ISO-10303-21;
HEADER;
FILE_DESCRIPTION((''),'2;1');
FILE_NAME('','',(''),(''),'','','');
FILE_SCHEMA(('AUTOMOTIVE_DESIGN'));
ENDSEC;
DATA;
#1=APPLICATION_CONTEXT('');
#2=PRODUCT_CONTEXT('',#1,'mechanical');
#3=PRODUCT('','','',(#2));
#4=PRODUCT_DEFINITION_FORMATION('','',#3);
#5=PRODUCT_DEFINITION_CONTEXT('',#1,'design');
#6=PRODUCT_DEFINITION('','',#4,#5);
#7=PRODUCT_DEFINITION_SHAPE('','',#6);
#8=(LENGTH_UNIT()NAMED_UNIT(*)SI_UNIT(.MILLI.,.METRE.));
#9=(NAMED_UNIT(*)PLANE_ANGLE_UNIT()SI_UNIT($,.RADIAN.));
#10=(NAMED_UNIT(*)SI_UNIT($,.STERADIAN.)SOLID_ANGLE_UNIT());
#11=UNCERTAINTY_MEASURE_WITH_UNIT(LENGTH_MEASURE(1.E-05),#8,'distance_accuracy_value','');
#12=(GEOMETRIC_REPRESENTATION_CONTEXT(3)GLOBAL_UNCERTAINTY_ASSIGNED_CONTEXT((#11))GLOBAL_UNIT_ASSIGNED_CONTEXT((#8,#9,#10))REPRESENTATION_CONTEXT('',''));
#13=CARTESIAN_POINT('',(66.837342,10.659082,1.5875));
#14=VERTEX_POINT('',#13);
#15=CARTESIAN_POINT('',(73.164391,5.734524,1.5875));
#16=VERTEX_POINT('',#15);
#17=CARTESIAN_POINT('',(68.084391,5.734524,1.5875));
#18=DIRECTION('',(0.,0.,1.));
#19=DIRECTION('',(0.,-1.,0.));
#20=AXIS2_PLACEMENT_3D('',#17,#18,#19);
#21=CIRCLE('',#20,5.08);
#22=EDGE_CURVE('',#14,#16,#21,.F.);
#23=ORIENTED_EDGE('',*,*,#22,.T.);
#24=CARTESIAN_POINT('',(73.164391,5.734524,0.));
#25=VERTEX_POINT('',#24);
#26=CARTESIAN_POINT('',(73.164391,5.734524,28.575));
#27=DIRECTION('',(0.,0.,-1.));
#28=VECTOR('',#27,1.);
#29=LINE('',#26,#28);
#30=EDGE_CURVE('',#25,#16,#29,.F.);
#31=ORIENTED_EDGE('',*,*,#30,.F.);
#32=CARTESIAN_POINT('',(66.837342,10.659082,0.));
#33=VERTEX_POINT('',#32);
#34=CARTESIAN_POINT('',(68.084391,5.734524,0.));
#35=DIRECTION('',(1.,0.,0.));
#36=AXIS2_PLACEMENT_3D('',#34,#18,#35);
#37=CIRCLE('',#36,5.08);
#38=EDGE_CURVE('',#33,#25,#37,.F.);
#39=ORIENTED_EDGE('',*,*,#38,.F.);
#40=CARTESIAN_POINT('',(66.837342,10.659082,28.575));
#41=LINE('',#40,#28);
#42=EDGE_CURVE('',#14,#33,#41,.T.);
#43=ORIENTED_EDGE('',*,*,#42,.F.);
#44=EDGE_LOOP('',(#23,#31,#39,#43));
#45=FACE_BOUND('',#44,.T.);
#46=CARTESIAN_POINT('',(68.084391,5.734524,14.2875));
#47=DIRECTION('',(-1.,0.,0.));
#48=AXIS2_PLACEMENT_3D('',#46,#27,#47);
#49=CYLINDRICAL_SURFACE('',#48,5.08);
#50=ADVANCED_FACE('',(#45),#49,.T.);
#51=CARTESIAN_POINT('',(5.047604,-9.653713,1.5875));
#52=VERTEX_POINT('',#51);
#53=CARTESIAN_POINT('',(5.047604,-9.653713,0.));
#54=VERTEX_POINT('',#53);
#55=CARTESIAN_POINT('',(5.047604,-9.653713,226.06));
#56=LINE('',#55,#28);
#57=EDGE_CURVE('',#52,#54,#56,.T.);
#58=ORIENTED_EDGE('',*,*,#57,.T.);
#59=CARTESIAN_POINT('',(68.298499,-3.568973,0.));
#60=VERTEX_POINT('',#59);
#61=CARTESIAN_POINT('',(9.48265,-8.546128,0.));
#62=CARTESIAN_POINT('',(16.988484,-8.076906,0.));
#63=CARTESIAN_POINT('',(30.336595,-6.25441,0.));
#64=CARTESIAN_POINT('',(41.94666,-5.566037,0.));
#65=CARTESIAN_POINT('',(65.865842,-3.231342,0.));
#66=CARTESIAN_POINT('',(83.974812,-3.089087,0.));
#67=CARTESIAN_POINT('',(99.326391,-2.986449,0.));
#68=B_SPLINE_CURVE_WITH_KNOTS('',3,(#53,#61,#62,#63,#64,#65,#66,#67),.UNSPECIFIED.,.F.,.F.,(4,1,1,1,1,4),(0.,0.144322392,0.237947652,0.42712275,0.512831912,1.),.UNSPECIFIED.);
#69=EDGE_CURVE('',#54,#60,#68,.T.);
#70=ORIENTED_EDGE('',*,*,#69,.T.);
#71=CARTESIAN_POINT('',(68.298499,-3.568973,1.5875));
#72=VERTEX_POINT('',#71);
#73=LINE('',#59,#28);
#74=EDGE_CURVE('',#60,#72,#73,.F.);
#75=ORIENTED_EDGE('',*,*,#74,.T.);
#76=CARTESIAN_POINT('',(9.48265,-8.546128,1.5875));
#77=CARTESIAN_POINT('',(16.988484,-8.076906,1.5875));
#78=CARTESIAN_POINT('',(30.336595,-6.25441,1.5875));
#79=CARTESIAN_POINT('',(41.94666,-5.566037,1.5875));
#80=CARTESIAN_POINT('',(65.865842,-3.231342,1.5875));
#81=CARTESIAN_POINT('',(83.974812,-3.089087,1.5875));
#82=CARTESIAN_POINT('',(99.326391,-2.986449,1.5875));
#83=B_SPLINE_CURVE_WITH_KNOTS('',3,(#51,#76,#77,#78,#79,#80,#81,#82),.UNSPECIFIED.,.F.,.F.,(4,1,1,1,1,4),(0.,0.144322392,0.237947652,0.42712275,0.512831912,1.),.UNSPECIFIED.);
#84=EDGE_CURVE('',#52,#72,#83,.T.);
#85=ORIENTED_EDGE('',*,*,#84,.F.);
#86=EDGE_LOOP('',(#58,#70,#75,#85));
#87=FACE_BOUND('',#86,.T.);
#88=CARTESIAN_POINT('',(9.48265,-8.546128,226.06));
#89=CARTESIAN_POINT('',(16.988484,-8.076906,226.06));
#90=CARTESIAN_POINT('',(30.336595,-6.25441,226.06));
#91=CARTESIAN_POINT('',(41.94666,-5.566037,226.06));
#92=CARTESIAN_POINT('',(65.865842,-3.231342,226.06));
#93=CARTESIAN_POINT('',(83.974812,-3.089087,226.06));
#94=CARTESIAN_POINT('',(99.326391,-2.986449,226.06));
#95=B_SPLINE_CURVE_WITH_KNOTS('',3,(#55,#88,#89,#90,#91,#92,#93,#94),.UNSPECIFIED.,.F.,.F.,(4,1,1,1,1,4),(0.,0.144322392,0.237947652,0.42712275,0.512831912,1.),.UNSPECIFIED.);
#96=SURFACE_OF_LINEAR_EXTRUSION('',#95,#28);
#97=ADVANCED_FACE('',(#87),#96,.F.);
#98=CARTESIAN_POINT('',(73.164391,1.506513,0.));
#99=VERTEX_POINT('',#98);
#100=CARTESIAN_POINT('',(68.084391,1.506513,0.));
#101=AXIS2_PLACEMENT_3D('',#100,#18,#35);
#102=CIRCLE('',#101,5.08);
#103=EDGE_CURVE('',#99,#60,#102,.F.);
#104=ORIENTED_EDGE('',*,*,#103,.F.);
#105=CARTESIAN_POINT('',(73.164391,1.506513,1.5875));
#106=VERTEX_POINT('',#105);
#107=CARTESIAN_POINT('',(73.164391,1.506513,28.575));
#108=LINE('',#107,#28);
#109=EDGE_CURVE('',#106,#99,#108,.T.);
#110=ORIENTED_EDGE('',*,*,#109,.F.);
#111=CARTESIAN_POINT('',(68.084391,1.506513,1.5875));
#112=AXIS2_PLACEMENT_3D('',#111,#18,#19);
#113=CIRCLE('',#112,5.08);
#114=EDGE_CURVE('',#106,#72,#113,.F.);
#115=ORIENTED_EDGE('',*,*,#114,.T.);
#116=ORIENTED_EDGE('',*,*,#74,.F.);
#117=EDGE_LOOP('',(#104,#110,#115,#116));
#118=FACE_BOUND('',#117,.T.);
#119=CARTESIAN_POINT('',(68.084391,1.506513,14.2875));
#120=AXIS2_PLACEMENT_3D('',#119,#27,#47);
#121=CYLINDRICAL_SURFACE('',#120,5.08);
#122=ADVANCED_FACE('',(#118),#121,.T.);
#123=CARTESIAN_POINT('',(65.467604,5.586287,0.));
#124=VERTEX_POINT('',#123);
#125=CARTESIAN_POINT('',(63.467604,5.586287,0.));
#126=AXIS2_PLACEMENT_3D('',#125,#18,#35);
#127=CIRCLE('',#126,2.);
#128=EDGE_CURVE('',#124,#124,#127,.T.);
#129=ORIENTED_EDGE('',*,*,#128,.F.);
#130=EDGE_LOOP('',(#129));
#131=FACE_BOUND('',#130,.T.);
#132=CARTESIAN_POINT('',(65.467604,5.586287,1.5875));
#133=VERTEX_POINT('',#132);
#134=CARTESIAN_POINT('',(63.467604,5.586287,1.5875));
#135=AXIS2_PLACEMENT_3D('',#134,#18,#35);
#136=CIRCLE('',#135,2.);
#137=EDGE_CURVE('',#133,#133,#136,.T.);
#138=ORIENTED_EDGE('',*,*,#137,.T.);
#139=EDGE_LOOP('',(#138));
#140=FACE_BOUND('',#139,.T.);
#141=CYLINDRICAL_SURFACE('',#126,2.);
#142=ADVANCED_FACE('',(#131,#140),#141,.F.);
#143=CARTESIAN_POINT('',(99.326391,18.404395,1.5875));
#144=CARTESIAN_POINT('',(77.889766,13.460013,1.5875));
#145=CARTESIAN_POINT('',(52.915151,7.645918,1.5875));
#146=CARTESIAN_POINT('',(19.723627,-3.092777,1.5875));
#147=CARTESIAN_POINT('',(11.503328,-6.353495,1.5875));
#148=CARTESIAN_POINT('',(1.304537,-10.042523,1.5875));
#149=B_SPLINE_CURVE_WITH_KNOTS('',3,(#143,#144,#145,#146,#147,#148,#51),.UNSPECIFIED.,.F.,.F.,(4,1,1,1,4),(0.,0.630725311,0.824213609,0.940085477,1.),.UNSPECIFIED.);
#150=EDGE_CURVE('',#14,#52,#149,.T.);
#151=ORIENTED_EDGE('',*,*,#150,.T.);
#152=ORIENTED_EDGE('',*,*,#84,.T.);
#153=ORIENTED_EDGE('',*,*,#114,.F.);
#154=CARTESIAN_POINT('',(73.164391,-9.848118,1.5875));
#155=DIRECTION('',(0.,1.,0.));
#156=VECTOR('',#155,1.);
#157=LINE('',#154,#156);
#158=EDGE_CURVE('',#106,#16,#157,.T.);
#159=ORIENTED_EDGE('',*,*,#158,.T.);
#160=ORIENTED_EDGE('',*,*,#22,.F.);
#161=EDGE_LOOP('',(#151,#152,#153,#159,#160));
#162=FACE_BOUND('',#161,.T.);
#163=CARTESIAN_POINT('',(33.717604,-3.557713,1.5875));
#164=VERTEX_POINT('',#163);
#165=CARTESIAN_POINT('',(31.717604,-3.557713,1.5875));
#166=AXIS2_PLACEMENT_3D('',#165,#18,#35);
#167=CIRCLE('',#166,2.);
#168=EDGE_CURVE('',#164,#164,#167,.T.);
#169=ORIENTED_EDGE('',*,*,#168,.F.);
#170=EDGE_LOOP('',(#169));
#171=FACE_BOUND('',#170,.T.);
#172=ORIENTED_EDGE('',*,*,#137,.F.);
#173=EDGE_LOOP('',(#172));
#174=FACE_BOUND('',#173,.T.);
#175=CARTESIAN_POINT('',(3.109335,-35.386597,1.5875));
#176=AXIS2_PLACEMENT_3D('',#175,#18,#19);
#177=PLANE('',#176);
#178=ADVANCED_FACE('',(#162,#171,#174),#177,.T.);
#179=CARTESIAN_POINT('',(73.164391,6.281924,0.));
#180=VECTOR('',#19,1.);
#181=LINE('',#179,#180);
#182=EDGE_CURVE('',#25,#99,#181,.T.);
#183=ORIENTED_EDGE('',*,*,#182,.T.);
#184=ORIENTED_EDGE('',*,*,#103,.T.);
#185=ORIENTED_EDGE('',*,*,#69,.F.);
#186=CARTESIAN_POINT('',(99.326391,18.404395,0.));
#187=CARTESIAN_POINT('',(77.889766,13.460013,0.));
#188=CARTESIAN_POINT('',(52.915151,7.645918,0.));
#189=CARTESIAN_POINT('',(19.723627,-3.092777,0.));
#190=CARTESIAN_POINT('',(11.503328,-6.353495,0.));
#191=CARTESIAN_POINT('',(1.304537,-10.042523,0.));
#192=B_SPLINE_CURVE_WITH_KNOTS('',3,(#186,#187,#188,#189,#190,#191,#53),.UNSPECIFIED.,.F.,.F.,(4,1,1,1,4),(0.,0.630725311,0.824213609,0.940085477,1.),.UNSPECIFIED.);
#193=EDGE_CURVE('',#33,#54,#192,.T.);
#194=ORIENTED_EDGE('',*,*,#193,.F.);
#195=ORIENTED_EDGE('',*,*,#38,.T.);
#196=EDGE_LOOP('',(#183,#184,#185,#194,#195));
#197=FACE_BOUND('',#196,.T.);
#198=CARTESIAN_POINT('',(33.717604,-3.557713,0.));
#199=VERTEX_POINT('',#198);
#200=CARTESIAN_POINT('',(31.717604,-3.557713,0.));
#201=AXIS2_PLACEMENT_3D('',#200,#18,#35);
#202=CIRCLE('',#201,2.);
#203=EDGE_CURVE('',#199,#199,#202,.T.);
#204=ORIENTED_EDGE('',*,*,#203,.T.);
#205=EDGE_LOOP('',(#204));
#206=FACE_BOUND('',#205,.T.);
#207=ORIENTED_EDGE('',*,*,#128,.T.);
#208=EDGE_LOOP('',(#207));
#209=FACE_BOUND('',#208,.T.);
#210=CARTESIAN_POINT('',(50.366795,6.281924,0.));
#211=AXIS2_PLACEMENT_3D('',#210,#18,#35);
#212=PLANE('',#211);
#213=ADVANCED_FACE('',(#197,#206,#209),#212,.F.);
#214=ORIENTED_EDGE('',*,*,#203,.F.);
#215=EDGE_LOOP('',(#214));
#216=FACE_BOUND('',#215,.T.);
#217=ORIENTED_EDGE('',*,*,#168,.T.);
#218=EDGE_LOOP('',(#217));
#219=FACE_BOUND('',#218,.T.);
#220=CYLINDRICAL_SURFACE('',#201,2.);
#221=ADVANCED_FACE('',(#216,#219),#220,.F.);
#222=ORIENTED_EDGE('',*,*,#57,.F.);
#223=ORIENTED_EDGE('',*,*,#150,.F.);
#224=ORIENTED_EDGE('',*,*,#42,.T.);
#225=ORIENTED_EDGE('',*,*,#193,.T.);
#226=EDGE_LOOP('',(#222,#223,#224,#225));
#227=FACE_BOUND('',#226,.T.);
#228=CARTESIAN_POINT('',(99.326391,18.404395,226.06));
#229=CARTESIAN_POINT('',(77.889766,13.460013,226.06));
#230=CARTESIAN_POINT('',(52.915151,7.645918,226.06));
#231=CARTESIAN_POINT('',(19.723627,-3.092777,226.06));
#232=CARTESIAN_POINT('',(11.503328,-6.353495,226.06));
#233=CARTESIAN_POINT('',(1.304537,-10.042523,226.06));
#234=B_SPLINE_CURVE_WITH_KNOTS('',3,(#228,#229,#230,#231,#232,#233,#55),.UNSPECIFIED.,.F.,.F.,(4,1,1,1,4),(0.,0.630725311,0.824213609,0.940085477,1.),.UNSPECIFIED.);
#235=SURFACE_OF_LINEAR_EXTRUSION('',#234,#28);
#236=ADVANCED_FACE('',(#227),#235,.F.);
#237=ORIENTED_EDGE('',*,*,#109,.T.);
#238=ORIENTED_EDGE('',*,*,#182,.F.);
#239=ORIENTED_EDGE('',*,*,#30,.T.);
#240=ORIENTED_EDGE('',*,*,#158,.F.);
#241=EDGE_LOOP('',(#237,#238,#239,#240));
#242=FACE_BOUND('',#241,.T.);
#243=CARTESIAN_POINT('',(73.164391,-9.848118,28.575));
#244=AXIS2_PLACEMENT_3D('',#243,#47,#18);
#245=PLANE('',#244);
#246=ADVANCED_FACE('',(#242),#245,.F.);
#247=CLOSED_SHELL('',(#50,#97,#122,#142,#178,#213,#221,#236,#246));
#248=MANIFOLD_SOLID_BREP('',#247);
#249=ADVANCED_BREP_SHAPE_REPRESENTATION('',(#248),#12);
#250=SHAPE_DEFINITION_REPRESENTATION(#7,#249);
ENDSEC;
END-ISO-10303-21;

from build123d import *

# Parameters (mm, degrees)
BOSS_EXTRUDE1_DEPTH       = 226.06
CUT_EXTRUDE1_DEPTH        = 248.603669875
CUT_EXTRUDE1_DEPTH_BACK   = 248.603669875
FILLET1_R                 = 5.08
SHELL1_START              = 31.75
SHELL1_DEPTH              = 162.56
SHELL1_START_2            = 3.175
SHELL1_2_DEPTH            = 219.71
SKETCH3_R                 = 2.032
CUT_EXTRUDE2_DEPTH        = 246.233624371
BOSS_EXTRUDE2_START       = -4.025198094
BOSS_EXTRUDE2_OUTLINE_R   = 1.5875
BOSS_EXTRUDE2_DEPTH       = 5.811624811
BOSS_EXTRUDE2_START_2     = -8.955775483
BOSS_EXTRUDE2_2_OUTLINE_R = 1.5875
BOSS_EXTRUDE2_2_DEPTH     = 4.930577389
CUT_EXTRUDE3_DEPTH        = 246.233624371
CUT_EXTRUDE3_DEPTH_BACK   = 246.233624371
SKETCH5_W                 = 235.931423423
SKETCH5_H                 = 77.627996968
SKETCH6_R                 = 2
CUT_EXTRUDE4_DEPTH        = 74.976362333


# Read off the part's stored shape, not the designer's step: Shell1, Boss-Extrude2
with BuildPart() as part:
    # Sketch1 → Boss-Extrude1 (new body)
    with BuildSketch(Plane.XY):
        with BuildLine():
            Line((99.32639085, 18.404394796), (99.32639085, -2.986448862))
            add(Edge.make_bspline(
                [(5.047603806, -9.653713384), (9.482649657, -8.546128483), (16.988483729, -8.076906091), (30.336595099, -6.254410192), (41.946659702, -5.566037344), (65.865842143, -3.231342143), (83.974811725, -3.089086557), (99.32639085, -2.986448862)],
                knots=[0, 0, 0, 0, 0.144322392, 0.237947652, 0.42712275, 0.512831912, 1, 1, 1, 1], degree=3))
            add(Edge.make_bspline(
                [(5.047603806, -9.653713384), (1.304537033, -10.042523479), (11.503328192, -6.353494655), (19.723627138, -3.092777487), (52.915151131, 7.645918304), (77.889766355, 13.460013374), (99.32639085, 18.404394796)],
                knots=[0, 0, 0, 0, 0.059914523, 0.175786391, 0.369274689, 1, 1, 1, 1], degree=3))
        make_face()
    extrude(amount=BOSS_EXTRUDE1_DEPTH)

    # Sketch2 → Cut-Extrude1 (cut, two sides: drawn at the far end of the back side and taken through both)
    with BuildSketch(Plane(origin=(0, 0, 0), x_dir=(1, 0, 0), z_dir=(0, 1, 0)).offset(-CUT_EXTRUDE1_DEPTH_BACK)):
        Polygon((169.681502528, 0), (169.681502528, -226.06), (73.16439085, -226.06), (73.16439085, -197.485), (93.73839085, -197.485), (93.73839085, -28.575), (73.16439085, -28.575), (73.16439085, 0), align=None)
    extrude(amount=CUT_EXTRUDE1_DEPTH + CUT_EXTRUDE1_DEPTH_BACK, mode=Mode.SUBTRACT)

    # Fillet1
    fillet1_edges = [part.edges().sort_by_distance(p)[0] for p in [
        (73.16439085, -3.388889971, 14.2875),
        (73.16439085, 12.236004014, 14.2875),
        (93.73839085, -3.026654485, 113.03),
        (93.73839085, 17.113551214, 113.03),
        (73.16439085, -3.388889971, 211.7725),
        (73.16439085, 12.236004014, 211.7725),
    ]]
    fillet(fillet1_edges, radius=FILLET1_R)

    # Shell1 outline → Shell1 (cut)
    with BuildSketch(Plane.XY.offset(SHELL1_START)):
        with BuildLine():
            ThreePointArc((90.56339085, 10.716231692), (89.84210345, 12.208829924), (88.224441264, 12.571147528))
            add(Edge.make_bspline(
                [(88.224441264, 12.571147528), (87.199954726, 12.331473265), (86.178161178, 12.091844736), (85.158893539, 11.852170354), (84.141984638, 11.612358579), (83.127267128, 11.372317854), (82.11457348, 11.131956606), (81.103735991, 10.891183246), (80.094586779, 10.649906167), (79.086957782, 10.408033746), (78.080680762, 10.165474344), (77.075587303, 9.922136302), (75.365261077, 9.50615692), (74.659515429, 9.333955274), (73.95421322, 9.161291111), (73.24929575, 8.988132524), (72.544704275, 8.814447596), (71.84038, 8.640204402), (71.136264087, 8.465371009), (70.432297655, 8.289915474), (69.728421779, 8.113805846), (69.024577498, 7.937010164), (68.320705808, 7.759496459), (67.616747671, 7.581232754)],
                knots=[0.118068853, 0.118068853, 0.118068853, 0.118068853, 0.118068853, 0.118068853, 0.118068853, 0.118068853, 0.118068853, 0.118068853, 0.118068853, 0.118068853, 0.118068853, 0.242924315, 0.242924315, 0.242924315, 0.242924315, 0.242924315, 0.242924315, 0.242924315, 0.242924315, 0.242924315, 0.242924315, 0.242924315, 0.330745026, 0.330745026, 0.330745026, 0.330745026, 0.330745026, 0.330745026, 0.330745026, 0.330745026, 0.330745026, 0.330745026, 0.330745026, 0.330745026, 0.330745026], degree=12))
            ThreePointArc((67.616747671, 7.581232754), (69.254468773, 7.237834237), (69.98939085, 5.734523672))
            Line((69.98939085, 5.734523672), (69.98939085, 1.506513014))
            ThreePointArc((69.98939085, 1.506513014), (69.459523341, 0.188167221), (68.164681525, -0.396794214))
            add(Edge.make_bspline(
                [(68.164681525, -0.396794214), (68.694992172, -0.374423154), (69.225275053, -0.352727917), (69.755528584, -0.331695291), (70.285751179, -0.311312074), (70.815941255, -0.291565067), (71.346097229, -0.272441078), (71.876217523, -0.25392692), (72.406300557, -0.236009412), (72.936344753, -0.218675382), (73.466348538, -0.201911658), (73.996310335, -0.18570508), (74.526228574, -0.170042489), (75.056101682, -0.154910735), (76.522372139, -0.114466983), (77.45867021, -0.090254504), (78.394813662, -0.06758666), (79.330793845, -0.046390933), (80.266602102, -0.026594862), (81.202229769, -0.008126042), (82.137668173, 0.009087874), (83.072908636, 0.025119175), (84.007942471, 0.040040096), (84.942760983, 0.053922812), (85.87735547, 0.066839443), (86.811717225, 0.07886205), (87.74583753, 0.09006264), (88.679707661, 0.100513159)],
                knots=[0.67202474, 0.67202474, 0.67202474, 0.67202474, 0.67202474, 0.67202474, 0.67202474, 0.67202474, 0.67202474, 0.67202474, 0.67202474, 0.67202474, 0.67202474, 0.67202474, 0.67202474, 0.75, 0.75, 0.75, 0.75, 0.75, 0.75, 0.75, 0.75, 0.75, 0.75, 0.75, 0.75, 0.75, 0.887817721, 0.887817721, 0.887817721, 0.887817721, 0.887817721, 0.887817721, 0.887817721, 0.887817721, 0.887817721, 0.887817721, 0.887817721, 0.887817721, 0.887817721, 0.887817721, 0.887817721], degree=14))
            ThreePointArc((88.679707661, 0.100513159), (90.012944885, 0.665913267), (90.56339085, 2.0053939))
            Line((90.56339085, 2.0053939), (90.56339085, 10.716231692))
        make_face()
        with BuildLine():
            ThreePointArc((69.98939085, 5.734523672), (69.254468773, 7.237834237), (67.616747644, 7.581232862))
            add(Edge.make_bspline(
                [(67.616747644, 7.581232862), (65.399836461, 7.019843113), (63.182067917, 6.451015332), (60.961598132, 5.873750666), (58.736579605, 5.2870495), (56.505161763, 4.689911333), (54.265491496, 4.081334769), (52.015713682, 3.460317509), (49.753971716, 2.825856339), (47.478408044, 2.176947117), (45.187164685, 1.512584769), (42.878383765, 0.831763272), (40.358491497, 0.075974277), (40.166643435, 0.018354472), (39.974662823, -0.039384328), (39.782548624, -0.097242688), (39.590299803, -0.155221168), (39.397915321, -0.213320331), (39.205394144, -0.271540739), (39.012735233, -0.329882954), (38.819937552, -0.388347539), (38.627000064, -0.446935056), (38.433921733, -0.505646067), (38.047481311, -0.6233162), (37.854115889, -0.68227633), (37.660618706, -0.741357704), (37.46700324, -0.800556496), (37.273282999, -0.859868869), (37.079471514, -0.919290978), (36.885582349, -0.97881897), (36.69162909, -1.038448983), (36.497625354, -1.098177145), (36.303584785, -1.157999576), (36.109521054, -1.217912388), (35.527301471, -1.397910273), (35.139116839, -1.518254909), (34.751002758, -1.638914656), (34.363068079, -1.759858551), (33.975421705, -1.881055606), (33.588172595, -2.002474805), (33.20142976, -2.124085105), (32.815302268, -2.245855438), (32.429899238, -2.367754709), (32.045329846, -2.489751794), (31.66170332, -2.611815547), (31.123971117, -2.783433666), (30.968986334, -2.832958389), (30.814181899, -2.882486873), (30.659565113, -2.93201703), (30.505143284, -2.981546776), (30.350923715, -3.031074022), (30.196913716, -3.080596682), (30.043120596, -3.130112665), (29.889551668, -3.179619883), (29.736214245, -3.229116246), (29.583115647, -3.27859966), (29.430263192, -3.328068033)],
                knots=[0.330745026, 0.330745026, 0.330745026, 0.330745026, 0.330745026, 0.330745026, 0.330745026, 0.330745026, 0.330745026, 0.330745026, 0.330745026, 0.330745026, 0.330745026, 0.607310788, 0.607310788, 0.607310788, 0.607310788, 0.607310788, 0.607310788, 0.607310788, 0.607310788, 0.607310788, 0.607310788, 0.607310788, 0.630084943, 0.630084943, 0.630084943, 0.630084943, 0.630084943, 0.630084943, 0.630084943, 0.630084943, 0.630084943, 0.630084943, 0.630084943, 0.652859097, 0.652859097, 0.652859097, 0.652859097, 0.652859097, 0.652859097, 0.652859097, 0.652859097, 0.652859097, 0.652859097, 0.652859097, 0.698407406, 0.698407406, 0.698407406, 0.698407406, 0.698407406, 0.698407406, 0.698407406, 0.698407406, 0.698407406, 0.698407406, 0.698407406, 0.716880093, 0.716880093, 0.716880093, 0.716880093, 0.716880093, 0.716880093, 0.716880093, 0.716880093, 0.716880093, 0.716880093, 0.716880093, 0.716880093, 0.716880093], degree=12))
            add(Edge.make_bspline(
                [(29.430263192, -3.328068033), (30.192321788, -3.253103705), (30.953742852, -3.181055792), (31.714498333, -3.111652976), (32.474560286, -3.044625223), (33.233901052, -2.979703638), (33.992493217, -2.916620464), (34.750309569, -2.855109092), (35.507323058, -2.794904058), (36.26350675, -2.735741051), (37.018833789, -2.677356913), (37.77327735, -2.619489644), (38.526810601, -2.561878406), (39.27940666, -2.504263523), (40.241275886, -2.430197827), (40.451437795, -2.413988578), (40.661523692, -2.397753121), (40.871532992, -2.381485838), (41.081465111, -2.36518111), (41.291319462, -2.34883332), (41.501095461, -2.332436848), (41.710792523, -2.315986075), (41.920410064, -2.299475384), (42.129947497, -2.282899155), (42.339404239, -2.266251771), (42.548779704, -2.249527611), (42.758073307, -2.232721059), (43.071890042, -2.207379213), (43.176475009, -2.198909942), (43.281039293, -2.190417989), (43.38558282, -2.181902656), (43.490105518, -2.173363251), (43.594607315, -2.164799076), (43.699088138, -2.156209439), (43.803547915, -2.147593642), (43.907986571, -2.138950992), (44.012404037, -2.130280793), (44.116800238, -2.12158235), (44.221175102, -2.112854969), (44.325528557, -2.104097954), (44.482026516, -2.090916937), (44.534185416, -2.08651578), (44.586353102, -2.082106088), (44.638462372, -2.077692142), (44.690677468, -2.073262507), (44.74276457, -2.068834253), (44.79486261, -2.064396055), (44.84709011, -2.05993977), (44.899190406, -2.055485443), (44.951182515, -2.051030032), (45.003429676, -2.046545196), (45.055514905, -2.042065555), (45.107662823, -2.037572174), (45.211955574, -2.028569312), (45.264108442, -2.024059127), (45.316267814, -2.019540326), (45.368433702, -2.015013048), (45.42060612, -2.010477431), (45.472785076, -2.005933613), (45.524970589, -2.001381732), (45.577162664, -1.996821927), (45.629361319, -1.992254336), (45.681566563, -1.987679097), (45.73377841, -1.983096348), (45.785996871, -1.978506228), (45.838221958, -1.973908876), (46.3083075, -1.93246885), (46.726586222, -1.895179261), (47.145296128, -1.857506655), (47.564443519, -1.819522312), (47.98403472, -1.781297798), (48.404076086, -1.742904961), (48.824573993, -1.704415937), (49.24553485, -1.665903148), (49.66696508, -1.627439299), (50.088871145, -1.589097383), (50.511259522, -1.550950675), (50.934136722, -1.513072738), (51.357509275, -1.47553742), (51.834368049, -1.433779033), (51.8873602, -1.429145723), (51.940360205, -1.424519069), (51.993368079, -1.419899217), (52.046383832, -1.415286311), (52.099407479, -1.410680497), (52.152439032, -1.40608192), (52.205478504, -1.401490725), (52.258525908, -1.396907058), (52.311581256, -1.392331062), (52.364644562, -1.387762884), (52.417715838, -1.38320267), (52.470795096, -1.378650563), (52.576969604, -1.369562855), (52.630062039, -1.365027462), (52.683179331, -1.360499209), (52.736263003, -1.355982684), (52.78940087, -1.351471194), (52.842545574, -1.346968801), (52.895651993, -1.342479031), (52.948780943, -1.337996995), (53.001972248, -1.333519945), (53.055147327, -1.329054684), (53.108262643, -1.324604451), (53.161436979, -1.320159017), (53.214588182, -1.31572572), (53.37405314, -1.302454763), (53.48036356, -1.293647424), (53.586674415, -1.284879943), (53.692985692, -1.276152212), (53.799297377, -1.267464124), (53.905609457, -1.258815573), (54.011921919, -1.25020645), (54.118234749, -1.241636649), (54.224547934, -1.233106063), (54.330861461, -1.224614583), (54.437175316, -1.216162103), (54.543489487, -1.207748516), (54.649803959, -1.199373714), (54.96874824, -1.174365343), (55.181378913, -1.157847807), (55.394010633, -1.141484125), (55.606643294, -1.125273441), (55.819276791, -1.109214898), (56.031911017, -1.093307639), (56.244545869, -1.077550807), (56.457181238, -1.061943545), (56.669817021, -1.046484998), (56.882453112, -1.031174307), (57.095089404, -1.016010616), (57.307725793, -1.000993068), (57.520362172, -0.986120806), (58.158270965, -0.941937311), (58.583543022, -0.913059346), (59.008813776, -0.884752245), (59.434082397, -0.857009171), (59.859348051, -0.829823289), (60.284609909, -0.803187765), (60.709867137, -0.777095761), (61.135118907, -0.751540443), (61.560364383, -0.726514975), (61.985602738, -0.702012521), (62.410833137, -0.678026246), (62.83605475, -0.654549315), (63.261266746, -0.631574892), (64.006388166, -0.592183223), (64.32630213, -0.575550919), (64.646209835, -0.559196323), (64.96611093, -0.543116532), (65.286005067, -0.527308639), (65.605891895, -0.511769741), (65.925771064, -0.496496937), (66.245642227, -0.481487322), (66.565505034, -0.466737997), (66.885359135, -0.45224606), (67.205204184, -0.438008612), (67.52503983, -0.424022754), (67.844865727, -0.410285587), (68.164681525, -0.396794215)],
                knots=[0.263276283, 0.263276283, 0.263276283, 0.263276283, 0.263276283, 0.263276283, 0.263276283, 0.263276283, 0.263276283, 0.263276283, 0.263276283, 0.263276283, 0.263276283, 0.263276283, 0.263276283, 0.375, 0.375, 0.375, 0.375, 0.375, 0.375, 0.375, 0.375, 0.375, 0.375, 0.375, 0.375, 0.375, 0.40625, 0.40625, 0.40625, 0.40625, 0.40625, 0.40625, 0.40625, 0.40625, 0.40625, 0.40625, 0.40625, 0.40625, 0.40625, 0.421875, 0.421875, 0.421875, 0.421875, 0.421875, 0.421875, 0.421875, 0.421875, 0.421875, 0.421875, 0.421875, 0.421875, 0.421875, 0.4296875, 0.4296875, 0.4296875, 0.4296875, 0.4296875, 0.4296875, 0.4296875, 0.4296875, 0.4296875, 0.4296875, 0.4296875, 0.4296875, 0.4296875, 0.4375, 0.4375, 0.4375, 0.4375, 0.4375, 0.4375, 0.4375, 0.4375, 0.4375, 0.4375, 0.4375, 0.4375, 0.4375, 0.5, 0.5, 0.5, 0.5, 0.5, 0.5, 0.5, 0.5, 0.5, 0.5, 0.5, 0.5, 0.5, 0.5078125, 0.5078125, 0.5078125, 0.5078125, 0.5078125, 0.5078125, 0.5078125, 0.5078125, 0.5078125, 0.5078125, 0.5078125, 0.5078125, 0.5078125, 0.515625, 0.515625, 0.515625, 0.515625, 0.515625, 0.515625, 0.515625, 0.515625, 0.515625, 0.515625, 0.515625, 0.515625, 0.515625, 0.53125, 0.53125, 0.53125, 0.53125, 0.53125, 0.53125, 0.53125, 0.53125, 0.53125, 0.53125, 0.53125, 0.53125, 0.53125, 0.5625, 0.5625, 0.5625, 0.5625, 0.5625, 0.5625, 0.5625, 0.5625, 0.5625, 0.5625, 0.5625, 0.5625, 0.5625, 0.625, 0.625, 0.625, 0.625, 0.625, 0.625, 0.625, 0.625, 0.625, 0.625, 0.625, 0.625, 0.625, 0.67202474, 0.67202474, 0.67202474, 0.67202474, 0.67202474, 0.67202474, 0.67202474, 0.67202474, 0.67202474, 0.67202474, 0.67202474, 0.67202474, 0.67202474, 0.67202474, 0.67202474], degree=14))
            ThreePointArc((68.164681525, -0.396794215), (69.459523341, 0.188167221), (69.98939085, 1.506513014))
            Line((69.98939085, 1.506513014), (69.98939085, 5.734523672))
        make_face()
    extrude(amount=SHELL1_DEPTH, mode=Mode.SUBTRACT)

    # Shell1 2 outline → Shell1 2 (cut)
    with BuildSketch(Plane.XY.offset(SHELL1_START_2)):
        with BuildLine():
            ThreePointArc((69.98939085, 5.734523672), (69.254468773, 7.237834237), (67.616747644, 7.581232862))
            add(Edge.make_bspline(
                [(67.616747644, 7.581232862), (65.399836461, 7.019843113), (63.182067917, 6.451015332), (60.961598132, 5.873750666), (58.736579605, 5.2870495), (56.505161763, 4.689911333), (54.265491496, 4.081334769), (52.015713682, 3.460317509), (49.753971716, 2.825856339), (47.478408044, 2.176947117), (45.187164685, 1.512584769), (42.878383765, 0.831763272), (40.358491497, 0.075974277), (40.166643435, 0.018354472), (39.974662823, -0.039384328), (39.782548624, -0.097242688), (39.590299803, -0.155221168), (39.397915321, -0.213320331), (39.205394144, -0.271540739), (39.012735233, -0.329882954), (38.819937552, -0.388347539), (38.627000064, -0.446935056), (38.433921733, -0.505646067), (38.047481311, -0.6233162), (37.854115889, -0.68227633), (37.660618706, -0.741357704), (37.46700324, -0.800556496), (37.273282999, -0.859868869), (37.079471514, -0.919290978), (36.885582349, -0.97881897), (36.69162909, -1.038448983), (36.497625354, -1.098177145), (36.303584785, -1.157999576), (36.109521054, -1.217912388), (35.527301471, -1.397910273), (35.139116839, -1.518254909), (34.751002758, -1.638914656), (34.363068079, -1.759858551), (33.975421705, -1.881055606), (33.588172595, -2.002474805), (33.20142976, -2.124085105), (32.815302268, -2.245855438), (32.429899238, -2.367754709), (32.045329846, -2.489751794), (31.66170332, -2.611815547), (31.123971117, -2.783433666), (30.968986334, -2.832958389), (30.814181899, -2.882486873), (30.659565113, -2.93201703), (30.505143284, -2.981546776), (30.350923715, -3.031074022), (30.196913716, -3.080596682), (30.043120596, -3.130112665), (29.889551668, -3.179619883), (29.736214245, -3.229116246), (29.583115647, -3.27859966), (29.430263192, -3.328068033)],
                knots=[0.330745026, 0.330745026, 0.330745026, 0.330745026, 0.330745026, 0.330745026, 0.330745026, 0.330745026, 0.330745026, 0.330745026, 0.330745026, 0.330745026, 0.330745026, 0.607310788, 0.607310788, 0.607310788, 0.607310788, 0.607310788, 0.607310788, 0.607310788, 0.607310788, 0.607310788, 0.607310788, 0.607310788, 0.630084943, 0.630084943, 0.630084943, 0.630084943, 0.630084943, 0.630084943, 0.630084943, 0.630084943, 0.630084943, 0.630084943, 0.630084943, 0.652859097, 0.652859097, 0.652859097, 0.652859097, 0.652859097, 0.652859097, 0.652859097, 0.652859097, 0.652859097, 0.652859097, 0.652859097, 0.698407406, 0.698407406, 0.698407406, 0.698407406, 0.698407406, 0.698407406, 0.698407406, 0.698407406, 0.698407406, 0.698407406, 0.698407406, 0.716880093, 0.716880093, 0.716880093, 0.716880093, 0.716880093, 0.716880093, 0.716880093, 0.716880093, 0.716880093, 0.716880093, 0.716880093, 0.716880093, 0.716880093], degree=12))
            add(Edge.make_bspline(
                [(29.430263192, -3.328068033), (30.192321788, -3.253103705), (30.953742852, -3.181055792), (31.714498333, -3.111652976), (32.474560286, -3.044625223), (33.233901052, -2.979703638), (33.992493217, -2.916620464), (34.750309569, -2.855109092), (35.507323058, -2.794904058), (36.26350675, -2.735741051), (37.018833789, -2.677356913), (37.77327735, -2.619489644), (38.526810601, -2.561878406), (39.27940666, -2.504263523), (40.241275886, -2.430197827), (40.451437795, -2.413988578), (40.661523692, -2.397753121), (40.871532992, -2.381485838), (41.081465111, -2.36518111), (41.291319462, -2.34883332), (41.501095461, -2.332436848), (41.710792523, -2.315986075), (41.920410064, -2.299475384), (42.129947497, -2.282899155), (42.339404239, -2.266251771), (42.548779704, -2.249527611), (42.758073307, -2.232721059), (43.071890042, -2.207379213), (43.176475009, -2.198909942), (43.281039293, -2.190417989), (43.38558282, -2.181902656), (43.490105518, -2.173363251), (43.594607315, -2.164799076), (43.699088138, -2.156209439), (43.803547915, -2.147593642), (43.907986571, -2.138950992), (44.012404037, -2.130280793), (44.116800238, -2.12158235), (44.221175102, -2.112854969), (44.325528557, -2.104097954), (44.482026516, -2.090916937), (44.534185416, -2.08651578), (44.586353102, -2.082106088), (44.638462372, -2.077692142), (44.690677468, -2.073262507), (44.74276457, -2.068834253), (44.79486261, -2.064396055), (44.84709011, -2.05993977), (44.899190406, -2.055485443), (44.951182515, -2.051030032), (45.003429676, -2.046545196), (45.055514905, -2.042065555), (45.107662823, -2.037572174), (45.211955574, -2.028569312), (45.264108442, -2.024059127), (45.316267814, -2.019540326), (45.368433702, -2.015013048), (45.42060612, -2.010477431), (45.472785076, -2.005933613), (45.524970589, -2.001381732), (45.577162664, -1.996821927), (45.629361319, -1.992254336), (45.681566563, -1.987679097), (45.73377841, -1.983096348), (45.785996871, -1.978506228), (45.838221958, -1.973908876), (46.3083075, -1.93246885), (46.726586222, -1.895179261), (47.145296128, -1.857506655), (47.564443519, -1.819522312), (47.98403472, -1.781297798), (48.404076086, -1.742904961), (48.824573993, -1.704415937), (49.24553485, -1.665903148), (49.66696508, -1.627439299), (50.088871145, -1.589097383), (50.511259522, -1.550950675), (50.934136722, -1.513072738), (51.357509275, -1.47553742), (51.834368049, -1.433779033), (51.8873602, -1.429145723), (51.940360205, -1.424519069), (51.993368079, -1.419899217), (52.046383832, -1.415286311), (52.099407479, -1.410680497), (52.152439032, -1.40608192), (52.205478504, -1.401490725), (52.258525908, -1.396907058), (52.311581256, -1.392331062), (52.364644562, -1.387762884), (52.417715838, -1.38320267), (52.470795096, -1.378650563), (52.576969604, -1.369562855), (52.630062039, -1.365027462), (52.683179331, -1.360499209), (52.736263003, -1.355982684), (52.78940087, -1.351471194), (52.842545574, -1.346968801), (52.895651993, -1.342479031), (52.948780943, -1.337996995), (53.001972248, -1.333519945), (53.055147327, -1.329054684), (53.108262643, -1.324604451), (53.161436979, -1.320159017), (53.214588182, -1.31572572), (53.37405314, -1.302454763), (53.48036356, -1.293647424), (53.586674415, -1.284879943), (53.692985692, -1.276152212), (53.799297377, -1.267464124), (53.905609457, -1.258815573), (54.011921919, -1.25020645), (54.118234749, -1.241636649), (54.224547934, -1.233106063), (54.330861461, -1.224614583), (54.437175316, -1.216162103), (54.543489487, -1.207748516), (54.649803959, -1.199373714), (54.96874824, -1.174365343), (55.181378913, -1.157847807), (55.394010633, -1.141484125), (55.606643294, -1.125273441), (55.819276791, -1.109214898), (56.031911017, -1.093307639), (56.244545869, -1.077550807), (56.457181238, -1.061943545), (56.669817021, -1.046484998), (56.882453112, -1.031174307), (57.095089404, -1.016010616), (57.307725793, -1.000993068), (57.520362172, -0.986120806), (58.158270965, -0.941937311), (58.583543022, -0.913059346), (59.008813776, -0.884752245), (59.434082397, -0.857009171), (59.859348051, -0.829823289), (60.284609909, -0.803187765), (60.709867137, -0.777095761), (61.135118907, -0.751540443), (61.560364383, -0.726514975), (61.985602738, -0.702012521), (62.410833137, -0.678026246), (62.83605475, -0.654549315), (63.261266746, -0.631574892), (64.006388166, -0.592183223), (64.32630213, -0.575550919), (64.646209835, -0.559196323), (64.96611093, -0.543116532), (65.286005067, -0.527308639), (65.605891895, -0.511769741), (65.925771064, -0.496496937), (66.245642227, -0.481487322), (66.565505034, -0.466737997), (66.885359135, -0.45224606), (67.205204184, -0.438008612), (67.52503983, -0.424022754), (67.844865727, -0.410285587), (68.164681525, -0.396794215)],
                knots=[0.263276283, 0.263276283, 0.263276283, 0.263276283, 0.263276283, 0.263276283, 0.263276283, 0.263276283, 0.263276283, 0.263276283, 0.263276283, 0.263276283, 0.263276283, 0.263276283, 0.263276283, 0.375, 0.375, 0.375, 0.375, 0.375, 0.375, 0.375, 0.375, 0.375, 0.375, 0.375, 0.375, 0.375, 0.40625, 0.40625, 0.40625, 0.40625, 0.40625, 0.40625, 0.40625, 0.40625, 0.40625, 0.40625, 0.40625, 0.40625, 0.40625, 0.421875, 0.421875, 0.421875, 0.421875, 0.421875, 0.421875, 0.421875, 0.421875, 0.421875, 0.421875, 0.421875, 0.421875, 0.421875, 0.4296875, 0.4296875, 0.4296875, 0.4296875, 0.4296875, 0.4296875, 0.4296875, 0.4296875, 0.4296875, 0.4296875, 0.4296875, 0.4296875, 0.4296875, 0.4375, 0.4375, 0.4375, 0.4375, 0.4375, 0.4375, 0.4375, 0.4375, 0.4375, 0.4375, 0.4375, 0.4375, 0.4375, 0.5, 0.5, 0.5, 0.5, 0.5, 0.5, 0.5, 0.5, 0.5, 0.5, 0.5, 0.5, 0.5, 0.5078125, 0.5078125, 0.5078125, 0.5078125, 0.5078125, 0.5078125, 0.5078125, 0.5078125, 0.5078125, 0.5078125, 0.5078125, 0.5078125, 0.5078125, 0.515625, 0.515625, 0.515625, 0.515625, 0.515625, 0.515625, 0.515625, 0.515625, 0.515625, 0.515625, 0.515625, 0.515625, 0.515625, 0.53125, 0.53125, 0.53125, 0.53125, 0.53125, 0.53125, 0.53125, 0.53125, 0.53125, 0.53125, 0.53125, 0.53125, 0.53125, 0.5625, 0.5625, 0.5625, 0.5625, 0.5625, 0.5625, 0.5625, 0.5625, 0.5625, 0.5625, 0.5625, 0.5625, 0.5625, 0.625, 0.625, 0.625, 0.625, 0.625, 0.625, 0.625, 0.625, 0.625, 0.625, 0.625, 0.625, 0.625, 0.67202474, 0.67202474, 0.67202474, 0.67202474, 0.67202474, 0.67202474, 0.67202474, 0.67202474, 0.67202474, 0.67202474, 0.67202474, 0.67202474, 0.67202474, 0.67202474, 0.67202474], degree=14))
            ThreePointArc((68.164681525, -0.396794215), (69.459523341, 0.188167221), (69.98939085, 1.506513014))
            Line((69.98939085, 1.506513014), (69.98939085, 5.734523672))
        make_face()
    extrude(amount=SHELL1_2_DEPTH, mode=Mode.SUBTRACT)

    # Sketch3 → Cut-Extrude2 (cut, through all)
    with BuildSketch(Plane.XY):
        with Locations((84.713563037, 5.874854857)):
            Circle(SKETCH3_R)
    extrude(amount=CUT_EXTRUDE2_DEPTH, mode=Mode.SUBTRACT)

    # Boss-Extrude2 outline → Boss-Extrude2 (add)
    with BuildSketch(Plane(origin=(0, 0.100513169, 0), x_dir=(0, 0, 1), z_dir=(0, -1, 0)).offset(BOSS_EXTRUDE2_START)):
        with Locations((50.8, -50.615235316)):
            Circle(BOSS_EXTRUDE2_OUTLINE_R)
        with Locations((126.965977315, -52.892053199)):
            Circle(BOSS_EXTRUDE2_OUTLINE_R)
        with Locations((203.16597731, -52.892933198)):
            Circle(BOSS_EXTRUDE2_OUTLINE_R)
        with Locations((76.2, -69.665235316)):
            Circle(BOSS_EXTRUDE2_OUTLINE_R)
        with Locations((152.365977315, -71.942053199)):
            Circle(BOSS_EXTRUDE2_OUTLINE_R)
    extrude(amount=BOSS_EXTRUDE2_DEPTH)

    # Boss-Extrude2 2 outline → Boss-Extrude2 2 (add)
    with BuildSketch(Plane(origin=(0, 0.100513169, 0), x_dir=(0, 0, 1), z_dir=(0, -1, 0)).offset(BOSS_EXTRUDE2_START_2)):
        with Locations((76.2, -69.665235316)):
            Circle(BOSS_EXTRUDE2_2_OUTLINE_R)
        with Locations((152.365977315, -71.942053199)):
            Circle(BOSS_EXTRUDE2_2_OUTLINE_R)
    extrude(amount=BOSS_EXTRUDE2_2_DEPTH)

    # Sketch5 → Cut-Extrude3 (cut, two sides: drawn at the far end of the back side and taken through both)
    with BuildSketch(Plane(origin=(0, 0, 0), x_dir=(0, 0, -1), z_dir=(1, 0, 0)).offset(-CUT_EXTRUDE3_DEPTH_BACK)):
        with Locations((-119.553211712, 3.427401288)):
            Rectangle(SKETCH5_W, SKETCH5_H)
    extrude(amount=CUT_EXTRUDE3_DEPTH + CUT_EXTRUDE3_DEPTH_BACK, mode=Mode.SUBTRACT)

    # Sketch6 → Cut-Extrude4 (cut, through all)
    with BuildSketch(Plane.XY.offset(1.5875)):
        with Locations((31.717603806, -3.557713384)):
            Circle(SKETCH6_R)
        with Locations((63.467603806, 5.586286616)):
            Circle(SKETCH6_R)
    extrude(amount=-CUT_EXTRUDE4_DEPTH, mode=Mode.SUBTRACT)


solid = part.part
